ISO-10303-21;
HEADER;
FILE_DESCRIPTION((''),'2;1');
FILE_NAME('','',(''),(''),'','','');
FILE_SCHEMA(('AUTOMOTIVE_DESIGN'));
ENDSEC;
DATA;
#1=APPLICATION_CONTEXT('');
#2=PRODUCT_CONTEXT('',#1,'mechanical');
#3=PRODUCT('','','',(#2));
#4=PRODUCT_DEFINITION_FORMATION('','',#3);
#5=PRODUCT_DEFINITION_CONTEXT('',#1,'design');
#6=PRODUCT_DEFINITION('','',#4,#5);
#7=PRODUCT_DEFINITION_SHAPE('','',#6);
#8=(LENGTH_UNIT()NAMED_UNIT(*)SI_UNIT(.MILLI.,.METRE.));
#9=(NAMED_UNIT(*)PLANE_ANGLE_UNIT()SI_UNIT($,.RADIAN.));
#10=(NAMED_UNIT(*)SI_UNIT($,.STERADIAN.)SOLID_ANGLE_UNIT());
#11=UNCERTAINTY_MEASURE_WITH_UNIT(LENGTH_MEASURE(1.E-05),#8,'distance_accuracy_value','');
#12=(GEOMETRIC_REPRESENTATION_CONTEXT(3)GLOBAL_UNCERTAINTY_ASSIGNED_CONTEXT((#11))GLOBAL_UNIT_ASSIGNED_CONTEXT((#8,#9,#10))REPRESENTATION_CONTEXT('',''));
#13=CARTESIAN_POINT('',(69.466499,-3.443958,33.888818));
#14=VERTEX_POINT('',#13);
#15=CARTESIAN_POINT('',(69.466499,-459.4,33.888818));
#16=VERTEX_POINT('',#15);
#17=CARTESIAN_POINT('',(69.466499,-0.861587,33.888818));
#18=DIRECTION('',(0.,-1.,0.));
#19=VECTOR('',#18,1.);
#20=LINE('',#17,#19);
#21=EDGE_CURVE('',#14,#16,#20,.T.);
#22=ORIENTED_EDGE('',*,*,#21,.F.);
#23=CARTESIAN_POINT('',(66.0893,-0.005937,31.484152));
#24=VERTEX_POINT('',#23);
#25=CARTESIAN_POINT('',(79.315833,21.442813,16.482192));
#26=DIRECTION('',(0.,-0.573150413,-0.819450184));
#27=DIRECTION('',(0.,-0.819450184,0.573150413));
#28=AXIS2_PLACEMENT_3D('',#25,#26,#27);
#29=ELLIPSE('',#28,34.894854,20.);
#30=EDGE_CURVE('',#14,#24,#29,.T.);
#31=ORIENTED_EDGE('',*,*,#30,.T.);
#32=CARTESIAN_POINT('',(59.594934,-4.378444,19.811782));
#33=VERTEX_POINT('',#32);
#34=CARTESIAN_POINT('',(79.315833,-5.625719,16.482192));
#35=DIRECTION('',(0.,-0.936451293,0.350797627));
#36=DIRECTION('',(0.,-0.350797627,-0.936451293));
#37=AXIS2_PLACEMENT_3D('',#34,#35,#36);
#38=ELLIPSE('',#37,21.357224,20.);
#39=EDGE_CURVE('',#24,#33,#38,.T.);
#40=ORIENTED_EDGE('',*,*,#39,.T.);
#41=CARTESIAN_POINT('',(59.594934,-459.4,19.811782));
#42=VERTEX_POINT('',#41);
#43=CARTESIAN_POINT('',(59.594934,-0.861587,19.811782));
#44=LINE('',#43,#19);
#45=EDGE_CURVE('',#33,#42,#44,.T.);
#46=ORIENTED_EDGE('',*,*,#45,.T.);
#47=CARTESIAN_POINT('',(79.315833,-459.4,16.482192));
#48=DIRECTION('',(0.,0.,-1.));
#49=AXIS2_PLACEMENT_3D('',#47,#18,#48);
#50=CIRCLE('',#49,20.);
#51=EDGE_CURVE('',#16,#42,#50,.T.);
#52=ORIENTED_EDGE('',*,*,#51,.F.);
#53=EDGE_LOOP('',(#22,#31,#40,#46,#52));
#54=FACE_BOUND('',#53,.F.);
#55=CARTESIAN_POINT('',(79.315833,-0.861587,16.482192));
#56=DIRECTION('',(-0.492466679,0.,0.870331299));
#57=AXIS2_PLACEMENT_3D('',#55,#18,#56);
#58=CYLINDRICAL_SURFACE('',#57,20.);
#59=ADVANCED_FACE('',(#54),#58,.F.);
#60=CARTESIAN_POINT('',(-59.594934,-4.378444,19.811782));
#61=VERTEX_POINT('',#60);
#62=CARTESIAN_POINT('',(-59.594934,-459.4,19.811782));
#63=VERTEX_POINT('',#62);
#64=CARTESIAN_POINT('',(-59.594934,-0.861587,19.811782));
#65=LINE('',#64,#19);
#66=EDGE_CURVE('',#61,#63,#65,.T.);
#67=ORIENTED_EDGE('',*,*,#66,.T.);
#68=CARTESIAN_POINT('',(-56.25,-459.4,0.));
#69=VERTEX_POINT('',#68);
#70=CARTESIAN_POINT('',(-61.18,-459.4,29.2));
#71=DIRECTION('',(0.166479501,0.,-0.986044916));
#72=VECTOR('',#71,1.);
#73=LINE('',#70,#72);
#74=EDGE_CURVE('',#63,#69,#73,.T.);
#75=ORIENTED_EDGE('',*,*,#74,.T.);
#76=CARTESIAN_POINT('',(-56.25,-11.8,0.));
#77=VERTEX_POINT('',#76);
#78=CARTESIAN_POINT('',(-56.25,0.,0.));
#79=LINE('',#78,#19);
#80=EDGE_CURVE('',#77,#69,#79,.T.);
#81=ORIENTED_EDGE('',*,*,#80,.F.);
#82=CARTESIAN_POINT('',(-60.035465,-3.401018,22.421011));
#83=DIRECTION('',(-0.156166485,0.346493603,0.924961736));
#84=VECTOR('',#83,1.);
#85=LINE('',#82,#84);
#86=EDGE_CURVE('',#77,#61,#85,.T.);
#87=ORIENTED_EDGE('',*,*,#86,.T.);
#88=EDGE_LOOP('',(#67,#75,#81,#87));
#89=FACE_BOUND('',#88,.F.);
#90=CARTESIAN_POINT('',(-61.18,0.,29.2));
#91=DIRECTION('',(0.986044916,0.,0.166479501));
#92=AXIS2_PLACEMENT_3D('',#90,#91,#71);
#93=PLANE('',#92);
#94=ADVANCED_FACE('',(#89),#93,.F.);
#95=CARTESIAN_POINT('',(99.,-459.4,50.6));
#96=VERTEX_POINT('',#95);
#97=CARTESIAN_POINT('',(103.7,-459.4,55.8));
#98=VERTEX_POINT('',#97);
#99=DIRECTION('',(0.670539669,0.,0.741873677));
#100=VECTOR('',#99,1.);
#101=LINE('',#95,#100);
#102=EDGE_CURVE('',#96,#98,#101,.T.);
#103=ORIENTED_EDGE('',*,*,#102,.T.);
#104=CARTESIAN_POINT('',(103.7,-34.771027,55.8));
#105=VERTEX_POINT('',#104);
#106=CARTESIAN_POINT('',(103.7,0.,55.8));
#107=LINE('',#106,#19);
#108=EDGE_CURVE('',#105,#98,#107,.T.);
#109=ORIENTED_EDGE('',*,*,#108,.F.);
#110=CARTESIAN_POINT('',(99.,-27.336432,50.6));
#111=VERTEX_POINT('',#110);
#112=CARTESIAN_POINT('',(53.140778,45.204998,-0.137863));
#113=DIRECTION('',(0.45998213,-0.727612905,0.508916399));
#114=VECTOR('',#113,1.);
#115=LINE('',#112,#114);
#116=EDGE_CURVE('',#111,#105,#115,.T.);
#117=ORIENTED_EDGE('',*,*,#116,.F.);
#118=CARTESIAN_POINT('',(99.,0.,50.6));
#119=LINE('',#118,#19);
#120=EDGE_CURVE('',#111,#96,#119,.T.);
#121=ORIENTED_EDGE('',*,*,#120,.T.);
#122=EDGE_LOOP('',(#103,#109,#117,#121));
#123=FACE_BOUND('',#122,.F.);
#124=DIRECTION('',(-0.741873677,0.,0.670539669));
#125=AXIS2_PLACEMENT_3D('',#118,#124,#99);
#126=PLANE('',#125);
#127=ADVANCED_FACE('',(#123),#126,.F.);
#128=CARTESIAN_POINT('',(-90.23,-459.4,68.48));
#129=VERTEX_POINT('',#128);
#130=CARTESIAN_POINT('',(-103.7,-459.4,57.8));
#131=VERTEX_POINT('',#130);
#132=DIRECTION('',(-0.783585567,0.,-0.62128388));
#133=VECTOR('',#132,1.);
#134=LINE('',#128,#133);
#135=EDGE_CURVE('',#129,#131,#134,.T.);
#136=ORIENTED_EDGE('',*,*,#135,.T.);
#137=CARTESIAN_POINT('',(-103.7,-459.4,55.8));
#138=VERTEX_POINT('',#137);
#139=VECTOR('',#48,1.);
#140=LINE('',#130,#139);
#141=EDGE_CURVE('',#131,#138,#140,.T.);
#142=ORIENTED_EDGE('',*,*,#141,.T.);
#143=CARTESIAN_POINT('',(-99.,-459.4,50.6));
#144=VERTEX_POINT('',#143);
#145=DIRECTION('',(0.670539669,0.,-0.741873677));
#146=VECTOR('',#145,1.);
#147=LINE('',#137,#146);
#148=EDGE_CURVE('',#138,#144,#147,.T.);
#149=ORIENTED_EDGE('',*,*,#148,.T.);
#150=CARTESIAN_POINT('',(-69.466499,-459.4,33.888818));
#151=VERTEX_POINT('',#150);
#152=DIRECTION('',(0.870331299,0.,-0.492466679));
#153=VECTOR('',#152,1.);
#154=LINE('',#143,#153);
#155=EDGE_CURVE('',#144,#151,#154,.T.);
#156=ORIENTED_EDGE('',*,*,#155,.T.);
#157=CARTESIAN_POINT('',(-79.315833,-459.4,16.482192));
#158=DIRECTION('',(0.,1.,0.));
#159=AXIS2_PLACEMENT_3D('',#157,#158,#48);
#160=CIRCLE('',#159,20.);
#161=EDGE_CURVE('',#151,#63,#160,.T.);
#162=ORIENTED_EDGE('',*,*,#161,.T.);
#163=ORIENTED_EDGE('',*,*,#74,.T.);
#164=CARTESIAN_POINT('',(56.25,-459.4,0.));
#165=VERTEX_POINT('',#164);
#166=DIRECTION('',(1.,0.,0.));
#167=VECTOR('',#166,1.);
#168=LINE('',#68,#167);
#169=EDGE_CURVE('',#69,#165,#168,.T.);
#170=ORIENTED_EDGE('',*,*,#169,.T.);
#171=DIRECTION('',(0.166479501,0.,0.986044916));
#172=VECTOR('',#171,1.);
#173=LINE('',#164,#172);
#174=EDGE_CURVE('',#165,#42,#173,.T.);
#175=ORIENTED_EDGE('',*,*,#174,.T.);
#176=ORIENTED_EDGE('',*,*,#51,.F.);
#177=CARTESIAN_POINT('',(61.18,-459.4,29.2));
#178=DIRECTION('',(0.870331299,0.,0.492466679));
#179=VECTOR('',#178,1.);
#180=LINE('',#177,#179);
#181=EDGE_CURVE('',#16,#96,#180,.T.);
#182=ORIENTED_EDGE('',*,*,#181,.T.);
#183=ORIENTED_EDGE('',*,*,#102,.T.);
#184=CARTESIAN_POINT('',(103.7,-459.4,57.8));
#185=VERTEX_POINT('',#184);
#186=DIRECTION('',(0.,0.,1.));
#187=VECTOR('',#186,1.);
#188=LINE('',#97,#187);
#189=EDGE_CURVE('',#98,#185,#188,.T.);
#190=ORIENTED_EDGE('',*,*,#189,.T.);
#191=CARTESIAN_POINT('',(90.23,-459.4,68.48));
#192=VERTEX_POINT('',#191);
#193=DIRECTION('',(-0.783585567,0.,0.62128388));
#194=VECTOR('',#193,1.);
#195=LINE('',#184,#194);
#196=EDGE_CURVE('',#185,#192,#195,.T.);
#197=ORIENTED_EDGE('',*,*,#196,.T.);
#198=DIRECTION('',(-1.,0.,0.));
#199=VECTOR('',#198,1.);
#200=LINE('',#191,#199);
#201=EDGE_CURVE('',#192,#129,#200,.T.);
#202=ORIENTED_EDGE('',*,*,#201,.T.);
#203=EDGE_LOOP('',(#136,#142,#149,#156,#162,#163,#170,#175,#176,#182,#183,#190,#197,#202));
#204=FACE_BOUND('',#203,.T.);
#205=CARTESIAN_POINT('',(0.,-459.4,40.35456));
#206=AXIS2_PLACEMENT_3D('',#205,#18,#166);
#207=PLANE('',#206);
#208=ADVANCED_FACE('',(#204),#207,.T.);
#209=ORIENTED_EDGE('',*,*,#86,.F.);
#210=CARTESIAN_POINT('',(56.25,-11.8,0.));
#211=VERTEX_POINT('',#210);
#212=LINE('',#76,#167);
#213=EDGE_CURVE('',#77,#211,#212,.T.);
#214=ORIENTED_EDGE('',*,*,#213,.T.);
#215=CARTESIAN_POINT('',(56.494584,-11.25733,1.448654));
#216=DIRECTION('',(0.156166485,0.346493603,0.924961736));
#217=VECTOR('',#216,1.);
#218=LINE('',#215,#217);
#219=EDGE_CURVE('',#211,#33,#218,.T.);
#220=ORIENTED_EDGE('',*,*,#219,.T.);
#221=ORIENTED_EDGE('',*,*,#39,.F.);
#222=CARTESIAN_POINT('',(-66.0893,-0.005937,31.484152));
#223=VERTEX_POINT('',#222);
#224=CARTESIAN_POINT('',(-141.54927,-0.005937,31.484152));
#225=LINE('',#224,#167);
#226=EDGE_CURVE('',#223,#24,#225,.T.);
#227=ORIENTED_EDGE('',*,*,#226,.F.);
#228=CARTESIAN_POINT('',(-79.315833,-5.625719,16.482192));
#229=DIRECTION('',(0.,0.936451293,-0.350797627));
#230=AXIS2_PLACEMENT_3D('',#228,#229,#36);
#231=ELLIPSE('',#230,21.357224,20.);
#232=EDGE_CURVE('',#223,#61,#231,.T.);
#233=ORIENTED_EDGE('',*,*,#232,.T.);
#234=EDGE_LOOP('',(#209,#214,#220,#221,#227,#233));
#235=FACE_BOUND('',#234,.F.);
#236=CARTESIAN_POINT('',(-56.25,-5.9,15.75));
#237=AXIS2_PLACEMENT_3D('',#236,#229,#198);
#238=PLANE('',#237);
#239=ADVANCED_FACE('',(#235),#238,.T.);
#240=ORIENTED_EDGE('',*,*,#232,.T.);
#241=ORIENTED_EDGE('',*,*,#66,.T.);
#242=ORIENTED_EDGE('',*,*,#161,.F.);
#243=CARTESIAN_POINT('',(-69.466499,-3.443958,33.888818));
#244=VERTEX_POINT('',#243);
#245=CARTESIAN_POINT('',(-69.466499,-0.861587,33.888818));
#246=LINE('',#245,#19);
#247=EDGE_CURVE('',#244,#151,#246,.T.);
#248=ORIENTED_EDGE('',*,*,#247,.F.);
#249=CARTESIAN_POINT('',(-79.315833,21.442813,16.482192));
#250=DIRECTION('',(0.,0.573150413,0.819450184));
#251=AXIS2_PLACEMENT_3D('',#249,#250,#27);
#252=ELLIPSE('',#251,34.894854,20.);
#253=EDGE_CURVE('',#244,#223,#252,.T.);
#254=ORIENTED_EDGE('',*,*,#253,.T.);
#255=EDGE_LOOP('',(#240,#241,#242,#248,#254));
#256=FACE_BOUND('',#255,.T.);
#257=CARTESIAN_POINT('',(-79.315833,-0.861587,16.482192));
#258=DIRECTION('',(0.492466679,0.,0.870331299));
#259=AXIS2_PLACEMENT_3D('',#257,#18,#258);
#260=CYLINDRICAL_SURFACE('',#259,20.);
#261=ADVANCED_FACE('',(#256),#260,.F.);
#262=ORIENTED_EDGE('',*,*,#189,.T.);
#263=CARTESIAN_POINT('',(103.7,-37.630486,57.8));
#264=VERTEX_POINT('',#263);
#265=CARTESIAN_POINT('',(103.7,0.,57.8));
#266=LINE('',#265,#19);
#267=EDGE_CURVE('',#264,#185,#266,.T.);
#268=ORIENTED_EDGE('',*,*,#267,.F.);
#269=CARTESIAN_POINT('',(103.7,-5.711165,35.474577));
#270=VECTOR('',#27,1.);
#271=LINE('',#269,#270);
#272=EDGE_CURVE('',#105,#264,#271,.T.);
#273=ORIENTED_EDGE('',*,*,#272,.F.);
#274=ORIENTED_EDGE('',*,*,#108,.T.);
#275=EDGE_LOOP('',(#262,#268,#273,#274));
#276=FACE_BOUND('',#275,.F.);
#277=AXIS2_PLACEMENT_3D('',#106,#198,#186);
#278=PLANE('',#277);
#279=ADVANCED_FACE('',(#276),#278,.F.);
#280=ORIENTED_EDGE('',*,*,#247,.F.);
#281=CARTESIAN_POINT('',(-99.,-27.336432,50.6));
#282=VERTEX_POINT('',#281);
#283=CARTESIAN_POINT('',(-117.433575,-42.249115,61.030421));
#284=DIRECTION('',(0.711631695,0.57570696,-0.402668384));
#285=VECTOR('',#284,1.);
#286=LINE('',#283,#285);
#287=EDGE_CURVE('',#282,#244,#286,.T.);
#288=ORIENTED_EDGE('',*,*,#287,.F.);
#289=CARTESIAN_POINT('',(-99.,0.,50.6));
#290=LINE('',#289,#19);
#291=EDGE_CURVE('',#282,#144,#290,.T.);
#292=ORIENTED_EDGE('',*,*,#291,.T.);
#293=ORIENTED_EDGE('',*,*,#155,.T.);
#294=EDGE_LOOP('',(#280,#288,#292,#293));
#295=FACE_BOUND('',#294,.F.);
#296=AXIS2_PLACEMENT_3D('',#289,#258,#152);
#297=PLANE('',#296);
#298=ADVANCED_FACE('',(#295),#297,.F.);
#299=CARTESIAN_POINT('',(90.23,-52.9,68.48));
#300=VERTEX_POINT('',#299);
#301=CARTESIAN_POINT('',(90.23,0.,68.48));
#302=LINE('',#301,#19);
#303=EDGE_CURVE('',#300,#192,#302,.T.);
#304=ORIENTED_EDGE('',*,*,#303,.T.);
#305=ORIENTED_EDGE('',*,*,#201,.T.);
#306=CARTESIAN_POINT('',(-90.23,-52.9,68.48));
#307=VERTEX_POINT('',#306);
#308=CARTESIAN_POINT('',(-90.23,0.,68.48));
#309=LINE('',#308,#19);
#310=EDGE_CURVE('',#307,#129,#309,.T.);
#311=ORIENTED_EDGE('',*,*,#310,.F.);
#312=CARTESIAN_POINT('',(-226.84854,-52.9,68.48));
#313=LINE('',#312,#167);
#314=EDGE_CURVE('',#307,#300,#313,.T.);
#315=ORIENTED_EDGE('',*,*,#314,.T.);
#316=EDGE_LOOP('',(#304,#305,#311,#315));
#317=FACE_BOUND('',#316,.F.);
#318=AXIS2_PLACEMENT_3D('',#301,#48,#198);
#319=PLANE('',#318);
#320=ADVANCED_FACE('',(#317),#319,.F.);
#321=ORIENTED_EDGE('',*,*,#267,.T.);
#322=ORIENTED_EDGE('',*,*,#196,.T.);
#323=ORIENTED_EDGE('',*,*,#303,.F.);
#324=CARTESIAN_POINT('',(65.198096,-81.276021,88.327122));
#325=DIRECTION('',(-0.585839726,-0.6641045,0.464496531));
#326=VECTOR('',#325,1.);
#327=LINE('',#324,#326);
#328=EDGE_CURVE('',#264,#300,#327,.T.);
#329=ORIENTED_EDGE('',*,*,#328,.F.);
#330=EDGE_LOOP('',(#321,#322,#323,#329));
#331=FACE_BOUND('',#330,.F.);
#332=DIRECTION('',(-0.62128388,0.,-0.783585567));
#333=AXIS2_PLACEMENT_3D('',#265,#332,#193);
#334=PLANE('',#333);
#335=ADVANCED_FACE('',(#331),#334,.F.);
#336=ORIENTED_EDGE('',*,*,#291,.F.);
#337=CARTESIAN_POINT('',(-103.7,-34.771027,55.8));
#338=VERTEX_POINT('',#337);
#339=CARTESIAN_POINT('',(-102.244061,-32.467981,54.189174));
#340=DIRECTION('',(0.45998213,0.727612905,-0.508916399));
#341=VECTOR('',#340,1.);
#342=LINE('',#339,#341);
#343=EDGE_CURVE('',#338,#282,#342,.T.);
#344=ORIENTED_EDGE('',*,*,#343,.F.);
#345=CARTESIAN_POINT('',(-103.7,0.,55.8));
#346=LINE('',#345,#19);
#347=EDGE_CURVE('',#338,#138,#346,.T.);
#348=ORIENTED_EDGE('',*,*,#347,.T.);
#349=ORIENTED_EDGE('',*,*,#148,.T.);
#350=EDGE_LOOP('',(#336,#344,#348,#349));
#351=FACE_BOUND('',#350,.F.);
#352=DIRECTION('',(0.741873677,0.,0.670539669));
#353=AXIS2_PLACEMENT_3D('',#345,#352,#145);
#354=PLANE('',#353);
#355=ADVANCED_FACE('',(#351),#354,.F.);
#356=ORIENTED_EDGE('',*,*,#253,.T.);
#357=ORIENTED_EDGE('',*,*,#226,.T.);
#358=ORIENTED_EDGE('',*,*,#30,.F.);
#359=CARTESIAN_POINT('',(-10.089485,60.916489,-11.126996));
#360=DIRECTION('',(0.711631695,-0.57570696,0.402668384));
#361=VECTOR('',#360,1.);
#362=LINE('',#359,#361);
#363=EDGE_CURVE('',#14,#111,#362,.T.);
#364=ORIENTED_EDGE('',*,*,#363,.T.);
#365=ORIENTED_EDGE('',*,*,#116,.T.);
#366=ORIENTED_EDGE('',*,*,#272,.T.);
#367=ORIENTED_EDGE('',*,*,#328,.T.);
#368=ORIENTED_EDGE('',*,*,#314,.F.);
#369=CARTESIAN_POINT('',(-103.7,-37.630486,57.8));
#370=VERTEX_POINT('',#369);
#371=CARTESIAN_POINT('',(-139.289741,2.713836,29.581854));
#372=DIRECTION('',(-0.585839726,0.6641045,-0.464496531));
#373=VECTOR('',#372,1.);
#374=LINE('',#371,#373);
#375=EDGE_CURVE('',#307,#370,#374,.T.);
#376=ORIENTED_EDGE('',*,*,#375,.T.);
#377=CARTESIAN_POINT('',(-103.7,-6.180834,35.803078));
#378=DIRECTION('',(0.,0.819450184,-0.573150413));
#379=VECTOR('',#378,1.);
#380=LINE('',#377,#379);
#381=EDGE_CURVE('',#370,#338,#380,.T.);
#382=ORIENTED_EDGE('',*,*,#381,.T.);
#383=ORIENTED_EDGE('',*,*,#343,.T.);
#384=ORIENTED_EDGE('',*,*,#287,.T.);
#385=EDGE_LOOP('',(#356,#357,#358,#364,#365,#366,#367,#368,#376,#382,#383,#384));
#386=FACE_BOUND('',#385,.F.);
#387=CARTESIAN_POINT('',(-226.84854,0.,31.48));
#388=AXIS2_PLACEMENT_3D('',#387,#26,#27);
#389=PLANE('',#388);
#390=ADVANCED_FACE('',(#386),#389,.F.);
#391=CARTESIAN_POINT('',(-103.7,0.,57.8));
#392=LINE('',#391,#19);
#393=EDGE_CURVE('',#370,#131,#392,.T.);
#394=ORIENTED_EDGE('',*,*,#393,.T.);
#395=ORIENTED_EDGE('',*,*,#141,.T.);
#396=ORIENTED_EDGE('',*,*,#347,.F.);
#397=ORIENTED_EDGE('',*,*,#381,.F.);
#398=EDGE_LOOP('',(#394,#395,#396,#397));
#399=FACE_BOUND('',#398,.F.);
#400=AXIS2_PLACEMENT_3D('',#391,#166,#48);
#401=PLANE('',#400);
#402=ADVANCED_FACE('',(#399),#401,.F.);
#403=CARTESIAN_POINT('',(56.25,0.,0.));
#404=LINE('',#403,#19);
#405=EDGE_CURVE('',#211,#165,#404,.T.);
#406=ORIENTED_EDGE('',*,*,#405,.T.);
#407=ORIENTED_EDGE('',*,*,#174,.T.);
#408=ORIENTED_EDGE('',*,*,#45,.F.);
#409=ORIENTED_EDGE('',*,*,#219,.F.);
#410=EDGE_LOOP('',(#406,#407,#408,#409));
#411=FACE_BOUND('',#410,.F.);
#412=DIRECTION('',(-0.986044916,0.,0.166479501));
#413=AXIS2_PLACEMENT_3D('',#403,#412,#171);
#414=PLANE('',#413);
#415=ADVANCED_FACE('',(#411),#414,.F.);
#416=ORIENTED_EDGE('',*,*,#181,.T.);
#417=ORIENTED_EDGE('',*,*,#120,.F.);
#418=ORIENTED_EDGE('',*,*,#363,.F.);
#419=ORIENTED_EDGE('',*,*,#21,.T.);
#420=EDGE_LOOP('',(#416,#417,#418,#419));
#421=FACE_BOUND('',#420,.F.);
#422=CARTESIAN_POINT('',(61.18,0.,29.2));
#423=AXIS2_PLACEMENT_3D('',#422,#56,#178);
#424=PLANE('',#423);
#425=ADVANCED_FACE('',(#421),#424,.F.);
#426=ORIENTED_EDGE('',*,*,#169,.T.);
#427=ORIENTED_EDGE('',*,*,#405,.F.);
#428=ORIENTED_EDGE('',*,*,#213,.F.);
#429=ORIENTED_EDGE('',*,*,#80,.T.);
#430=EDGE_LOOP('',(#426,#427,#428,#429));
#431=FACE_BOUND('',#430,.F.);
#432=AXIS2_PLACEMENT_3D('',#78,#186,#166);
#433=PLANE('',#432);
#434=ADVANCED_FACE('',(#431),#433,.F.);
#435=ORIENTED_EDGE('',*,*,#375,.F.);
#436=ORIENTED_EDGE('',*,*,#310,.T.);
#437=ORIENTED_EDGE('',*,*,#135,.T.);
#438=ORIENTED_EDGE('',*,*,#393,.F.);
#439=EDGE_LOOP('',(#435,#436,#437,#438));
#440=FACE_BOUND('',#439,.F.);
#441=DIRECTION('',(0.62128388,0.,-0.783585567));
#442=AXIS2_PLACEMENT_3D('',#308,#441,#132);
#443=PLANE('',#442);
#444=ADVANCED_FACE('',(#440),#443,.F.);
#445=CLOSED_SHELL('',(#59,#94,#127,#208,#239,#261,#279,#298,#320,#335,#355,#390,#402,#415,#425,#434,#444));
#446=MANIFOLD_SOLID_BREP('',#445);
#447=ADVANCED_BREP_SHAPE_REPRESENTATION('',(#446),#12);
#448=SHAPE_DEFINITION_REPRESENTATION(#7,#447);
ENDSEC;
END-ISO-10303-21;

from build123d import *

# Parameters (mm, degrees)
F1_DEPTH    = 459.4
F2_SIZE2    = 31.5
F2_SIZE     = 11.8
F3_T1_DEPTH = 453.6970794399
F4_R        = 20


# Not quite as in the source:
# - a fillet or chamfer that OpenCascade refuses, or shapes differently, is made with other operations: its cross-section is extruded or revolved along the edge and cut away or added


with BuildPart() as f1:
    # F0 (on Front) → F1 (new body)
    with BuildSketch(Plane.XZ):
        Polygon((-61.18, 29.2), (-56.25, 0), (56.25, 0), (61.18, 29.2), (99, 50.6), (103.7, 55.8), (103.7, 57.8), (90.23, 68.48), (-90.23, 68.48), (-103.7, 57.8), (-103.7, 55.8), (-99, 50.6), align=None)
    extrude(amount=F1_DEPTH)

    # F2
    f2_edges = [f1.edges().sort_by_distance(p)[0] for p in [
        (0, 0, 0),
    ]]
    f2_side = f1.faces().sort_by_distance((0, -229.7, 0))[0]
    chamfer(f2_edges, length=F2_SIZE, length2=F2_SIZE2, reference=f2_side)

    # F3: chamfer of 52.9 x 37 on 1 edges, made by hand

    # F3_s2 → F3_t1 (cut)
    with BuildSketch(Plane.YZ.offset(-226.8485397199)):
        Polygon((0, 31.48), (-52.9, 68.48), (0, 68.48), align=None)
    extrude(amount=F3_T1_DEPTH, mode=Mode.SUBTRACT)

    # F4 (call 1 of 2: OpenCascade refuses the feature's edges together)
    f4_edges = [f1.edges().sort_by_distance(p)[0] for p in [
        (61.18, -230.130794, 29.2),
    ]]
    fillet(f4_edges, radius=F4_R)

    # F4#2 (call 2 of 2)
    f4_2_edges = [f1.edges().sort_by_distance(p)[0] for p in [
        (-61.18, -230.130794, 29.2),
    ]]
    fillet(f4_2_edges, radius=F4_R)


solid = f1.part
